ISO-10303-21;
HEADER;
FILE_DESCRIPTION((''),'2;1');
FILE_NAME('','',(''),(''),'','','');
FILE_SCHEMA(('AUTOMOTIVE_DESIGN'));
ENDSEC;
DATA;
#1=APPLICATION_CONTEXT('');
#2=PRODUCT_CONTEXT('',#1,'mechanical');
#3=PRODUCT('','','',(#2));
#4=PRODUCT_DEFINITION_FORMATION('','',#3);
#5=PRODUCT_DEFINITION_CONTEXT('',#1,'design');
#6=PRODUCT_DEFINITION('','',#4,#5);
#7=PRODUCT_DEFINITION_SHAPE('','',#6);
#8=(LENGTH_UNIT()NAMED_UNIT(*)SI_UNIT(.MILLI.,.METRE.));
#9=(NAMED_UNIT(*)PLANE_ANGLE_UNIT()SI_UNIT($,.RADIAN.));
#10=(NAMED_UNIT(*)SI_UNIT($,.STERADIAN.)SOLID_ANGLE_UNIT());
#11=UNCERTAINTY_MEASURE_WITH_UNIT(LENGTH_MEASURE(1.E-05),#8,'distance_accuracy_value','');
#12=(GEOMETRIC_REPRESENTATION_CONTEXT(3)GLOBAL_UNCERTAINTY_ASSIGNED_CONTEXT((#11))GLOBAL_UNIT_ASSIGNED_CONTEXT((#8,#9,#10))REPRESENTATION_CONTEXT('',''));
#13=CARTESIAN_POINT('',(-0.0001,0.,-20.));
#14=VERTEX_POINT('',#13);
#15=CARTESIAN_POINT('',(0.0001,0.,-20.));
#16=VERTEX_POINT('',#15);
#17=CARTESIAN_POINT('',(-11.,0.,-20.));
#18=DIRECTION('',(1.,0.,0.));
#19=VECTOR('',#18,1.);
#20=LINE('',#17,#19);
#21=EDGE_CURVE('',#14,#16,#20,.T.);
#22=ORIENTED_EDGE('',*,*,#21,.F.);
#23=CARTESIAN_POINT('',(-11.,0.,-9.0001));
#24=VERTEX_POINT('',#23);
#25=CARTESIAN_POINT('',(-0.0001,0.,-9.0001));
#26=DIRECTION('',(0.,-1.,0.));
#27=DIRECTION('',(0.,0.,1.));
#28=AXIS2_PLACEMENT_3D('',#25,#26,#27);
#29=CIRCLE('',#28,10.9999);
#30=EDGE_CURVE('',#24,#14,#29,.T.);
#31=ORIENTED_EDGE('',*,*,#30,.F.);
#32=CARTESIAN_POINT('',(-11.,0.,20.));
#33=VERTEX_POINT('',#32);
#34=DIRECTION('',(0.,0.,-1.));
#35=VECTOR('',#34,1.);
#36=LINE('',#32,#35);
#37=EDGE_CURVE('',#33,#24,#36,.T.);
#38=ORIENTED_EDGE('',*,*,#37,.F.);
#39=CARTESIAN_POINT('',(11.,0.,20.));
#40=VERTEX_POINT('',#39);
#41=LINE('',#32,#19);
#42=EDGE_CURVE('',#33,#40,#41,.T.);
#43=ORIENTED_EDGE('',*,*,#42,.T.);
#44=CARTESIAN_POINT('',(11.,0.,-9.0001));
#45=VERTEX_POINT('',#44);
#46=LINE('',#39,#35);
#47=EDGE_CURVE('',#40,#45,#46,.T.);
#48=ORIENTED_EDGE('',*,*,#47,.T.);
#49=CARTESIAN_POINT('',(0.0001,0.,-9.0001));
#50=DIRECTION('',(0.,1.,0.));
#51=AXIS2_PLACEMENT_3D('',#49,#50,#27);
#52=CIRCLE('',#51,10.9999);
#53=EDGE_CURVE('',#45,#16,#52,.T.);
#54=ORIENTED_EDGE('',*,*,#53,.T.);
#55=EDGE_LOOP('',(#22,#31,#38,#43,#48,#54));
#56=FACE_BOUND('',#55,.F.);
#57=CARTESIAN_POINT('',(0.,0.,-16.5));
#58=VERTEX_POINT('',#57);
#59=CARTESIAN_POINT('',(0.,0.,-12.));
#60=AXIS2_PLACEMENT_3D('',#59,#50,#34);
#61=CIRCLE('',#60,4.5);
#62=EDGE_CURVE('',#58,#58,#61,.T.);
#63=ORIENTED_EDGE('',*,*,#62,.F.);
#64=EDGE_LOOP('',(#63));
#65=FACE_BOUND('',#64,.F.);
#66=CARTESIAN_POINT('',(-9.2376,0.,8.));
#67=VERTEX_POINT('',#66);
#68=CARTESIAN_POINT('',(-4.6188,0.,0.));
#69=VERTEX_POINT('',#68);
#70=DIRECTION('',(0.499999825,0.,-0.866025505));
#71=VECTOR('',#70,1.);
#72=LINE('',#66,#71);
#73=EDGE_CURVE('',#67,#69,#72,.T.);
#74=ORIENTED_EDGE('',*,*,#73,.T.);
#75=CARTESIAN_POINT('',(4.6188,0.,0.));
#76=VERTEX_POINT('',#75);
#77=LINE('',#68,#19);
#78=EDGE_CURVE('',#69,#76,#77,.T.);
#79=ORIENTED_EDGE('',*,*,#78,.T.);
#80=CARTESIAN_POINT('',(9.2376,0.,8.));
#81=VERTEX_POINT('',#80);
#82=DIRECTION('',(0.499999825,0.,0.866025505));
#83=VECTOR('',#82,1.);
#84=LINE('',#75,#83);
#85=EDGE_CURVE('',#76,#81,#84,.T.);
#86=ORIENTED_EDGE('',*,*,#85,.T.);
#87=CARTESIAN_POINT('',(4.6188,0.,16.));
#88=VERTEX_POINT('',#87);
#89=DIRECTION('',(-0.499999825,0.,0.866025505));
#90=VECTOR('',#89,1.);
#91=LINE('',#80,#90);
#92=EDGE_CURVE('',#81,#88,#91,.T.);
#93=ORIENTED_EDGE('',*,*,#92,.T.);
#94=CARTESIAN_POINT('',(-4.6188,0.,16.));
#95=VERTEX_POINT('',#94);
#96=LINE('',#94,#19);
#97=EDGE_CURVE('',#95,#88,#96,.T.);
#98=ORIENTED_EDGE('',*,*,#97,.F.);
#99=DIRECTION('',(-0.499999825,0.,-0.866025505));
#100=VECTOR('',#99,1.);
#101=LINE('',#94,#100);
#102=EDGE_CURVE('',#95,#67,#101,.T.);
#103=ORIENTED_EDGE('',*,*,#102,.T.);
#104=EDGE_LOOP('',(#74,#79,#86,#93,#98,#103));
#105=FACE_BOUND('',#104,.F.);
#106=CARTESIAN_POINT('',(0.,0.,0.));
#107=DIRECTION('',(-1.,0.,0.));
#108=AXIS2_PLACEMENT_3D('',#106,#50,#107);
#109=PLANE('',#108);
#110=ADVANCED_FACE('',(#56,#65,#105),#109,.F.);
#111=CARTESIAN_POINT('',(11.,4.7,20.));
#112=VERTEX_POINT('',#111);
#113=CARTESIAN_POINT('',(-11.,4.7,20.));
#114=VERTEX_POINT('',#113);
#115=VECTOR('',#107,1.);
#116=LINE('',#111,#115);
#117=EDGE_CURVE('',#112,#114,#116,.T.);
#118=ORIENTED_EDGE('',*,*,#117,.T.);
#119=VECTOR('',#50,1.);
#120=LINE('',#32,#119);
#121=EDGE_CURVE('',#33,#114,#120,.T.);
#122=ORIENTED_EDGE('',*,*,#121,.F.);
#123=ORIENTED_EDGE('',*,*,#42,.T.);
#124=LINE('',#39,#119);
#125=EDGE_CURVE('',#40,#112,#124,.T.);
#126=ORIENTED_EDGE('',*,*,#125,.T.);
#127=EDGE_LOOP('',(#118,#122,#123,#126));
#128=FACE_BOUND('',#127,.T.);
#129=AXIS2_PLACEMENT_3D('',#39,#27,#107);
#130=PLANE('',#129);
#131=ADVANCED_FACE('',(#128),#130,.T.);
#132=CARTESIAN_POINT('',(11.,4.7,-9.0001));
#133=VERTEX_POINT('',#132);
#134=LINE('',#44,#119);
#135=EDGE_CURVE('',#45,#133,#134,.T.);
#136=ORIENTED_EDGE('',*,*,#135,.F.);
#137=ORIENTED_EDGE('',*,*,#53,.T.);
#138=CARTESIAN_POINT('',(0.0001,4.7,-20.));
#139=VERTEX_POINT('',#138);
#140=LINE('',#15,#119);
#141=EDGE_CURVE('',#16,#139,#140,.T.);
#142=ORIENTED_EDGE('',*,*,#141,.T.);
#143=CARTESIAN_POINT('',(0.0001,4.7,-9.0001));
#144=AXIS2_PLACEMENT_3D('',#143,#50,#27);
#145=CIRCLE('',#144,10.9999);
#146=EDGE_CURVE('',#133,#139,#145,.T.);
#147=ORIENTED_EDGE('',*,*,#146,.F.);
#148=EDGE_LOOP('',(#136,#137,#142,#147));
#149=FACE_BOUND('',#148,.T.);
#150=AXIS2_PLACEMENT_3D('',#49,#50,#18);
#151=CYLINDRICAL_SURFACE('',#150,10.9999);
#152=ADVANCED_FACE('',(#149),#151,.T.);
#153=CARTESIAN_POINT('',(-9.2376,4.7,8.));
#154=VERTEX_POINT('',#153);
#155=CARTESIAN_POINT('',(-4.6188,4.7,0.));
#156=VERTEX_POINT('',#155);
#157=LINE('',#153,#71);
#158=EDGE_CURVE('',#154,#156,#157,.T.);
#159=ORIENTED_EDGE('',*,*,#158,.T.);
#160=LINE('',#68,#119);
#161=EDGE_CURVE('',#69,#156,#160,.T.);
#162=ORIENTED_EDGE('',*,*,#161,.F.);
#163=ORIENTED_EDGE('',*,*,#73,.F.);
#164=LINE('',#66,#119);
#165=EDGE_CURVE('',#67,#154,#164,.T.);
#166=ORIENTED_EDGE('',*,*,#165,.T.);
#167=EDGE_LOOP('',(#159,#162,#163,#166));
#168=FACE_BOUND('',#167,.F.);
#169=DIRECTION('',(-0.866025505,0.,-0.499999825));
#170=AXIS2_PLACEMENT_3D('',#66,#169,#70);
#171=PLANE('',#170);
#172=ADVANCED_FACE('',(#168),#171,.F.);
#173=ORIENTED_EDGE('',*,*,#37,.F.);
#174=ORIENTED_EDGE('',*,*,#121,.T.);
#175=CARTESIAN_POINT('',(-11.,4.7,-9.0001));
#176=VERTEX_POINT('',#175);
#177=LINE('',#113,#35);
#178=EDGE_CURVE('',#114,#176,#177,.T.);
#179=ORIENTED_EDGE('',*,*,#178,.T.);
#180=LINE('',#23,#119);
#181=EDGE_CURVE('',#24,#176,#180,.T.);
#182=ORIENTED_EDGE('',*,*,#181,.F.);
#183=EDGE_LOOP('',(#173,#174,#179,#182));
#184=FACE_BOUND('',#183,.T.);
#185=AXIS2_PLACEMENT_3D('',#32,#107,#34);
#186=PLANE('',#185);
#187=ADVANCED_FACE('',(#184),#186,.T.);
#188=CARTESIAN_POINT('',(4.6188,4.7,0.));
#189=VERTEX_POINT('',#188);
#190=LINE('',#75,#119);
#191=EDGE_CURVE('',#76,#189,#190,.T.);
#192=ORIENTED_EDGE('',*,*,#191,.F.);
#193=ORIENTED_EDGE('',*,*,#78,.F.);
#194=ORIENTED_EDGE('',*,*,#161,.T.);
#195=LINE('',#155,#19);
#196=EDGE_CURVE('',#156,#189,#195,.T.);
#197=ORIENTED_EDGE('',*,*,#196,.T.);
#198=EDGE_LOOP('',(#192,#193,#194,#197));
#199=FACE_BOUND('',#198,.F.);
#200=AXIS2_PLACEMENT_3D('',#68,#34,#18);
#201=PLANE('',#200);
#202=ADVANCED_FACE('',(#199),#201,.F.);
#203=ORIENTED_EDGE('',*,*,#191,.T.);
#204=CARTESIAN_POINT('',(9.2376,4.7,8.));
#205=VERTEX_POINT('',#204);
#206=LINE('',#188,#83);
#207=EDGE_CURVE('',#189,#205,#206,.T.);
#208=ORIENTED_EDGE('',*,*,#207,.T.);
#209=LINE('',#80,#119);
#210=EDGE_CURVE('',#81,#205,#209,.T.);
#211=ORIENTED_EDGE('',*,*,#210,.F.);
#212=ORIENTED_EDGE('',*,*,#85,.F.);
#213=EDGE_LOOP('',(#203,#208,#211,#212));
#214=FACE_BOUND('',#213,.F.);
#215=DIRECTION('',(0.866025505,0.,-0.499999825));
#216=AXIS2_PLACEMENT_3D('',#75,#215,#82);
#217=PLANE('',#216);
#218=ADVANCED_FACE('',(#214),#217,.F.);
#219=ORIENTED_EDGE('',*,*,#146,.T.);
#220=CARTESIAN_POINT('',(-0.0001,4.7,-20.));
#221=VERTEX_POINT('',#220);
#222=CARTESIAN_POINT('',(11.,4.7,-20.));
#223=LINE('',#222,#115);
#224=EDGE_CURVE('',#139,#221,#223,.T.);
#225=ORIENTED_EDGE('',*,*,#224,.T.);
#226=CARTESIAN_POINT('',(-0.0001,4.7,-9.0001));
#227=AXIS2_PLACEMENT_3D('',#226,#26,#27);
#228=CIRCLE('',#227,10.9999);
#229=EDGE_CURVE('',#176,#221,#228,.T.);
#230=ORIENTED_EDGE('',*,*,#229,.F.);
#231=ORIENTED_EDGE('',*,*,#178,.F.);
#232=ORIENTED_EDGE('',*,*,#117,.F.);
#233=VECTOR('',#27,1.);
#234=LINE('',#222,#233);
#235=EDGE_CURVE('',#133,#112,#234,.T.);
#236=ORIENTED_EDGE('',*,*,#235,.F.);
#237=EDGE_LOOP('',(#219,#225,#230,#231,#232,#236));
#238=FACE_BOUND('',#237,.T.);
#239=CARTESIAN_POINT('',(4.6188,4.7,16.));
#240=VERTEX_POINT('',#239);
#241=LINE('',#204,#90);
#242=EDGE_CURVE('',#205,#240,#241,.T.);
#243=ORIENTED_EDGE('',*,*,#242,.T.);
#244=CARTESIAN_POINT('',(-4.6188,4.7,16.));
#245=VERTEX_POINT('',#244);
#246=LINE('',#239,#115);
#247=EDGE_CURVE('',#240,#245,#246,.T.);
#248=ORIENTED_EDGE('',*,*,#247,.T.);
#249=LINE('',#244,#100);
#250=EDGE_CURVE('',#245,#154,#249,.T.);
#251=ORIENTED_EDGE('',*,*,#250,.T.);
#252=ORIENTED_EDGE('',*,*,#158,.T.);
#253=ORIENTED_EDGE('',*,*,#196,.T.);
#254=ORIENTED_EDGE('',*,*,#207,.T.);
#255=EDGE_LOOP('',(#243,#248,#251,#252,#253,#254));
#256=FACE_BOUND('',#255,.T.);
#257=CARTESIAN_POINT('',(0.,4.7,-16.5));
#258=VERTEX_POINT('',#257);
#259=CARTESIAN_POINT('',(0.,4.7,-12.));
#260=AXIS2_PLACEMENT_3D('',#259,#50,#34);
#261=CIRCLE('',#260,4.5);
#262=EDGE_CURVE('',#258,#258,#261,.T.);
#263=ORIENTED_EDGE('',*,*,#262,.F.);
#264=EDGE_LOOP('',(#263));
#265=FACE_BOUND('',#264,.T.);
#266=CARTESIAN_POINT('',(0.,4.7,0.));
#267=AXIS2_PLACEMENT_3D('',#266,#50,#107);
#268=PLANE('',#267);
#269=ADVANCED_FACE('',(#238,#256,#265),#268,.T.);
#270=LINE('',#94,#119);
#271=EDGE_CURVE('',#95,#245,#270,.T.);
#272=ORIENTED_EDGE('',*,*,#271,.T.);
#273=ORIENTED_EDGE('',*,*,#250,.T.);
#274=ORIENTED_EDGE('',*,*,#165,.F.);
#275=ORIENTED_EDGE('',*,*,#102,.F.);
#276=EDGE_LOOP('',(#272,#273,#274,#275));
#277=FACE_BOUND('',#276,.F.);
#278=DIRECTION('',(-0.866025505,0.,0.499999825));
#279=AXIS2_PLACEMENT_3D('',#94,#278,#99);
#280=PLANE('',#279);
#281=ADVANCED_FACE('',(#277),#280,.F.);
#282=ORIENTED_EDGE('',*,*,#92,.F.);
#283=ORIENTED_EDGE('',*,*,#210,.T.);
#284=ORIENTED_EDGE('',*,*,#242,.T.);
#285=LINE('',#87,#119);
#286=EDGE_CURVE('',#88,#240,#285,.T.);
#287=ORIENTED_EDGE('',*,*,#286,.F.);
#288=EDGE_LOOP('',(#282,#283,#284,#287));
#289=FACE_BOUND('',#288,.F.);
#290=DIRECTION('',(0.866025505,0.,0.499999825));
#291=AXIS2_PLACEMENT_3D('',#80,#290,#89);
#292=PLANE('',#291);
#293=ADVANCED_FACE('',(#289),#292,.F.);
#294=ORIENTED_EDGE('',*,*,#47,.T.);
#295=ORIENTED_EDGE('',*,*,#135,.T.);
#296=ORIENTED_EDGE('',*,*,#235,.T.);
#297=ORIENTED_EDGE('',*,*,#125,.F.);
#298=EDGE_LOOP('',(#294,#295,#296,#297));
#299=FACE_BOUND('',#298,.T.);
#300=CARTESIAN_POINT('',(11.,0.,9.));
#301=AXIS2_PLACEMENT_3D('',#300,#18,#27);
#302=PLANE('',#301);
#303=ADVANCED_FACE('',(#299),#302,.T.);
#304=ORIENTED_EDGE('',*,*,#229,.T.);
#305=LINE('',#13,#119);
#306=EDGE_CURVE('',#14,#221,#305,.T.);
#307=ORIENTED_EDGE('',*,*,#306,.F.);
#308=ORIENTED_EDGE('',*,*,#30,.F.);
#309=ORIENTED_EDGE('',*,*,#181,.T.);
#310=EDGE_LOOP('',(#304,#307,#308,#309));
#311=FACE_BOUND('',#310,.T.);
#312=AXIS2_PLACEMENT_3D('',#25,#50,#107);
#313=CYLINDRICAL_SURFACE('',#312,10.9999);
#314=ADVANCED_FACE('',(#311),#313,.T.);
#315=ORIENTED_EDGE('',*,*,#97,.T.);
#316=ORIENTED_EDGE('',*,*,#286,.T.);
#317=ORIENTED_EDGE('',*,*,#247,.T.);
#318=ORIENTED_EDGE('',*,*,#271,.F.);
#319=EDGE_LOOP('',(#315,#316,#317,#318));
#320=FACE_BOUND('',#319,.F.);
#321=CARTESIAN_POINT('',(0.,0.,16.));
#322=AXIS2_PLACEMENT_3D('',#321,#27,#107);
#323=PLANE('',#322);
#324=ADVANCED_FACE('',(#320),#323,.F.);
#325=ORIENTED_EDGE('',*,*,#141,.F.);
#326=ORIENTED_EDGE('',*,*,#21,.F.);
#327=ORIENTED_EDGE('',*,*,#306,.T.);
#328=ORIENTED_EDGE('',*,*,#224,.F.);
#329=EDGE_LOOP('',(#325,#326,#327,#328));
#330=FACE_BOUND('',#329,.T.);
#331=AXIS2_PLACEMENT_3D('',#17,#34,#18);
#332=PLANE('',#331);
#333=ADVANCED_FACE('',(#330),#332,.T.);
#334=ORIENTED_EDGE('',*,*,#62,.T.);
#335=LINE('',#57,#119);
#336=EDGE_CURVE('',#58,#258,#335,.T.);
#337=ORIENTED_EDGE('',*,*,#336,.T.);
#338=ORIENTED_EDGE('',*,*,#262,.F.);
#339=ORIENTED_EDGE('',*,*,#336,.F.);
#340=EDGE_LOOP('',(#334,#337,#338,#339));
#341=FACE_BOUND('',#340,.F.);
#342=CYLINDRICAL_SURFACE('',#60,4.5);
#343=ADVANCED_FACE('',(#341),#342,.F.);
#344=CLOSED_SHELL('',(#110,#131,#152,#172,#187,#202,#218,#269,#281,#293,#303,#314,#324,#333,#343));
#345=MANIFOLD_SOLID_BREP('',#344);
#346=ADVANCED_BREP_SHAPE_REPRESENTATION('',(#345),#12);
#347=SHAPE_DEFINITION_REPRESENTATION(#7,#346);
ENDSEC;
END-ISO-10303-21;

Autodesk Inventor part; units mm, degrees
ref_plane "YZ Plane" through (0, 0, 0) normal (1, 0, 0) x (0, 1, 0)
ref_plane "XZ Plane" through (0, 0, 0) normal (0, 1, 0) x (-1, 0, 0)
ref_plane "XY Plane" through (0, 0, 0) normal (0, 0, 1) x (1, 0, 0)
sketch "Sketch1" plane through (0, 0, 0) normal (0, 1, 0) x (-1, 0, 0)
  line L0 (-11, 20) -> (11, 20)
  line L1 (11, 20) -> (11, -20)
  line L2 (11, -20) -> (-11, -20)
  line L3 (-11, -20) -> (-11, 20)
  line L4 (-11, 20) -> (11, -20) construction
  line L5 (11, 20) -> (-11, -20) construction
  line L6 (-11, -20) -> (-11, -12)
  line L7 (-11, 20) -> (-11, 9)
  line L8 (0, -20) -> (0, -12)
  line L9 (0, 20) -> (0, 8)
  line L10 (-4.6188, 0) -> (-9.2376, 8)
  line L11 (-9.2376, 8) -> (-4.6188, 16)
  line L12 (-4.6188, 16) -> (4.6188, 16)
  line L13 (4.6188, 16) -> (9.2376, 8)
  line L14 (9.2376, 8) -> (4.6188, 0)
  line L15 (4.6188, 0) -> (-4.6188, 0)
  dimension "d0" = 22
  dimension "d1" = 40
  dimension "d35" = 12
  dimension "d36" = 16
extrude "Plate1" add sketch "Sketch1" along normal blind 4.7 contours L0 L1 L2 L3 | L10 L11 L12 L13 L14 L15
hole "Hole4" at (0, 0, -12) direction (0, 1, 0) diameter 9 end through all clearance for "Countersunk Flat Head Screw ISO 2009/7046" size "M8" standard "ISO"
full round fillet "Fillet2" first side at (11, 1.5667, 6.6667) centre faces at (3.6667, 3.1333, -20) second side at (-11, 1.5667, -6.6667)
extrude "Cut1" cut sketch "Sketch1" along normal blind 4.7 contours L10 L11 L12 L13 L14 L15
equation "\"d31\" = Thickness"
equation "\"d37\" = Thickness"
equation "\"d3\" = Thickness"
equation "\"BendRadius\" = Thickness"
equation "\"BendReliefWidth\" = Thickness"
equation "\"BendReliefDepth\" = 0.5 * Thickness"
equation "\"CornerReliefSize\" = 4 * Thickness"
equation "\"MinimumRemnant\" = 2 * Thickness"
equation "\"TransitionRadius\" = BendRadius"
equation "\"JacobiRadiusSize\" = BendRadius"
equation "\"GapSize\" = Thickness"
equation "\"Thickness\" = 4.7"
properties part number "chapa"
